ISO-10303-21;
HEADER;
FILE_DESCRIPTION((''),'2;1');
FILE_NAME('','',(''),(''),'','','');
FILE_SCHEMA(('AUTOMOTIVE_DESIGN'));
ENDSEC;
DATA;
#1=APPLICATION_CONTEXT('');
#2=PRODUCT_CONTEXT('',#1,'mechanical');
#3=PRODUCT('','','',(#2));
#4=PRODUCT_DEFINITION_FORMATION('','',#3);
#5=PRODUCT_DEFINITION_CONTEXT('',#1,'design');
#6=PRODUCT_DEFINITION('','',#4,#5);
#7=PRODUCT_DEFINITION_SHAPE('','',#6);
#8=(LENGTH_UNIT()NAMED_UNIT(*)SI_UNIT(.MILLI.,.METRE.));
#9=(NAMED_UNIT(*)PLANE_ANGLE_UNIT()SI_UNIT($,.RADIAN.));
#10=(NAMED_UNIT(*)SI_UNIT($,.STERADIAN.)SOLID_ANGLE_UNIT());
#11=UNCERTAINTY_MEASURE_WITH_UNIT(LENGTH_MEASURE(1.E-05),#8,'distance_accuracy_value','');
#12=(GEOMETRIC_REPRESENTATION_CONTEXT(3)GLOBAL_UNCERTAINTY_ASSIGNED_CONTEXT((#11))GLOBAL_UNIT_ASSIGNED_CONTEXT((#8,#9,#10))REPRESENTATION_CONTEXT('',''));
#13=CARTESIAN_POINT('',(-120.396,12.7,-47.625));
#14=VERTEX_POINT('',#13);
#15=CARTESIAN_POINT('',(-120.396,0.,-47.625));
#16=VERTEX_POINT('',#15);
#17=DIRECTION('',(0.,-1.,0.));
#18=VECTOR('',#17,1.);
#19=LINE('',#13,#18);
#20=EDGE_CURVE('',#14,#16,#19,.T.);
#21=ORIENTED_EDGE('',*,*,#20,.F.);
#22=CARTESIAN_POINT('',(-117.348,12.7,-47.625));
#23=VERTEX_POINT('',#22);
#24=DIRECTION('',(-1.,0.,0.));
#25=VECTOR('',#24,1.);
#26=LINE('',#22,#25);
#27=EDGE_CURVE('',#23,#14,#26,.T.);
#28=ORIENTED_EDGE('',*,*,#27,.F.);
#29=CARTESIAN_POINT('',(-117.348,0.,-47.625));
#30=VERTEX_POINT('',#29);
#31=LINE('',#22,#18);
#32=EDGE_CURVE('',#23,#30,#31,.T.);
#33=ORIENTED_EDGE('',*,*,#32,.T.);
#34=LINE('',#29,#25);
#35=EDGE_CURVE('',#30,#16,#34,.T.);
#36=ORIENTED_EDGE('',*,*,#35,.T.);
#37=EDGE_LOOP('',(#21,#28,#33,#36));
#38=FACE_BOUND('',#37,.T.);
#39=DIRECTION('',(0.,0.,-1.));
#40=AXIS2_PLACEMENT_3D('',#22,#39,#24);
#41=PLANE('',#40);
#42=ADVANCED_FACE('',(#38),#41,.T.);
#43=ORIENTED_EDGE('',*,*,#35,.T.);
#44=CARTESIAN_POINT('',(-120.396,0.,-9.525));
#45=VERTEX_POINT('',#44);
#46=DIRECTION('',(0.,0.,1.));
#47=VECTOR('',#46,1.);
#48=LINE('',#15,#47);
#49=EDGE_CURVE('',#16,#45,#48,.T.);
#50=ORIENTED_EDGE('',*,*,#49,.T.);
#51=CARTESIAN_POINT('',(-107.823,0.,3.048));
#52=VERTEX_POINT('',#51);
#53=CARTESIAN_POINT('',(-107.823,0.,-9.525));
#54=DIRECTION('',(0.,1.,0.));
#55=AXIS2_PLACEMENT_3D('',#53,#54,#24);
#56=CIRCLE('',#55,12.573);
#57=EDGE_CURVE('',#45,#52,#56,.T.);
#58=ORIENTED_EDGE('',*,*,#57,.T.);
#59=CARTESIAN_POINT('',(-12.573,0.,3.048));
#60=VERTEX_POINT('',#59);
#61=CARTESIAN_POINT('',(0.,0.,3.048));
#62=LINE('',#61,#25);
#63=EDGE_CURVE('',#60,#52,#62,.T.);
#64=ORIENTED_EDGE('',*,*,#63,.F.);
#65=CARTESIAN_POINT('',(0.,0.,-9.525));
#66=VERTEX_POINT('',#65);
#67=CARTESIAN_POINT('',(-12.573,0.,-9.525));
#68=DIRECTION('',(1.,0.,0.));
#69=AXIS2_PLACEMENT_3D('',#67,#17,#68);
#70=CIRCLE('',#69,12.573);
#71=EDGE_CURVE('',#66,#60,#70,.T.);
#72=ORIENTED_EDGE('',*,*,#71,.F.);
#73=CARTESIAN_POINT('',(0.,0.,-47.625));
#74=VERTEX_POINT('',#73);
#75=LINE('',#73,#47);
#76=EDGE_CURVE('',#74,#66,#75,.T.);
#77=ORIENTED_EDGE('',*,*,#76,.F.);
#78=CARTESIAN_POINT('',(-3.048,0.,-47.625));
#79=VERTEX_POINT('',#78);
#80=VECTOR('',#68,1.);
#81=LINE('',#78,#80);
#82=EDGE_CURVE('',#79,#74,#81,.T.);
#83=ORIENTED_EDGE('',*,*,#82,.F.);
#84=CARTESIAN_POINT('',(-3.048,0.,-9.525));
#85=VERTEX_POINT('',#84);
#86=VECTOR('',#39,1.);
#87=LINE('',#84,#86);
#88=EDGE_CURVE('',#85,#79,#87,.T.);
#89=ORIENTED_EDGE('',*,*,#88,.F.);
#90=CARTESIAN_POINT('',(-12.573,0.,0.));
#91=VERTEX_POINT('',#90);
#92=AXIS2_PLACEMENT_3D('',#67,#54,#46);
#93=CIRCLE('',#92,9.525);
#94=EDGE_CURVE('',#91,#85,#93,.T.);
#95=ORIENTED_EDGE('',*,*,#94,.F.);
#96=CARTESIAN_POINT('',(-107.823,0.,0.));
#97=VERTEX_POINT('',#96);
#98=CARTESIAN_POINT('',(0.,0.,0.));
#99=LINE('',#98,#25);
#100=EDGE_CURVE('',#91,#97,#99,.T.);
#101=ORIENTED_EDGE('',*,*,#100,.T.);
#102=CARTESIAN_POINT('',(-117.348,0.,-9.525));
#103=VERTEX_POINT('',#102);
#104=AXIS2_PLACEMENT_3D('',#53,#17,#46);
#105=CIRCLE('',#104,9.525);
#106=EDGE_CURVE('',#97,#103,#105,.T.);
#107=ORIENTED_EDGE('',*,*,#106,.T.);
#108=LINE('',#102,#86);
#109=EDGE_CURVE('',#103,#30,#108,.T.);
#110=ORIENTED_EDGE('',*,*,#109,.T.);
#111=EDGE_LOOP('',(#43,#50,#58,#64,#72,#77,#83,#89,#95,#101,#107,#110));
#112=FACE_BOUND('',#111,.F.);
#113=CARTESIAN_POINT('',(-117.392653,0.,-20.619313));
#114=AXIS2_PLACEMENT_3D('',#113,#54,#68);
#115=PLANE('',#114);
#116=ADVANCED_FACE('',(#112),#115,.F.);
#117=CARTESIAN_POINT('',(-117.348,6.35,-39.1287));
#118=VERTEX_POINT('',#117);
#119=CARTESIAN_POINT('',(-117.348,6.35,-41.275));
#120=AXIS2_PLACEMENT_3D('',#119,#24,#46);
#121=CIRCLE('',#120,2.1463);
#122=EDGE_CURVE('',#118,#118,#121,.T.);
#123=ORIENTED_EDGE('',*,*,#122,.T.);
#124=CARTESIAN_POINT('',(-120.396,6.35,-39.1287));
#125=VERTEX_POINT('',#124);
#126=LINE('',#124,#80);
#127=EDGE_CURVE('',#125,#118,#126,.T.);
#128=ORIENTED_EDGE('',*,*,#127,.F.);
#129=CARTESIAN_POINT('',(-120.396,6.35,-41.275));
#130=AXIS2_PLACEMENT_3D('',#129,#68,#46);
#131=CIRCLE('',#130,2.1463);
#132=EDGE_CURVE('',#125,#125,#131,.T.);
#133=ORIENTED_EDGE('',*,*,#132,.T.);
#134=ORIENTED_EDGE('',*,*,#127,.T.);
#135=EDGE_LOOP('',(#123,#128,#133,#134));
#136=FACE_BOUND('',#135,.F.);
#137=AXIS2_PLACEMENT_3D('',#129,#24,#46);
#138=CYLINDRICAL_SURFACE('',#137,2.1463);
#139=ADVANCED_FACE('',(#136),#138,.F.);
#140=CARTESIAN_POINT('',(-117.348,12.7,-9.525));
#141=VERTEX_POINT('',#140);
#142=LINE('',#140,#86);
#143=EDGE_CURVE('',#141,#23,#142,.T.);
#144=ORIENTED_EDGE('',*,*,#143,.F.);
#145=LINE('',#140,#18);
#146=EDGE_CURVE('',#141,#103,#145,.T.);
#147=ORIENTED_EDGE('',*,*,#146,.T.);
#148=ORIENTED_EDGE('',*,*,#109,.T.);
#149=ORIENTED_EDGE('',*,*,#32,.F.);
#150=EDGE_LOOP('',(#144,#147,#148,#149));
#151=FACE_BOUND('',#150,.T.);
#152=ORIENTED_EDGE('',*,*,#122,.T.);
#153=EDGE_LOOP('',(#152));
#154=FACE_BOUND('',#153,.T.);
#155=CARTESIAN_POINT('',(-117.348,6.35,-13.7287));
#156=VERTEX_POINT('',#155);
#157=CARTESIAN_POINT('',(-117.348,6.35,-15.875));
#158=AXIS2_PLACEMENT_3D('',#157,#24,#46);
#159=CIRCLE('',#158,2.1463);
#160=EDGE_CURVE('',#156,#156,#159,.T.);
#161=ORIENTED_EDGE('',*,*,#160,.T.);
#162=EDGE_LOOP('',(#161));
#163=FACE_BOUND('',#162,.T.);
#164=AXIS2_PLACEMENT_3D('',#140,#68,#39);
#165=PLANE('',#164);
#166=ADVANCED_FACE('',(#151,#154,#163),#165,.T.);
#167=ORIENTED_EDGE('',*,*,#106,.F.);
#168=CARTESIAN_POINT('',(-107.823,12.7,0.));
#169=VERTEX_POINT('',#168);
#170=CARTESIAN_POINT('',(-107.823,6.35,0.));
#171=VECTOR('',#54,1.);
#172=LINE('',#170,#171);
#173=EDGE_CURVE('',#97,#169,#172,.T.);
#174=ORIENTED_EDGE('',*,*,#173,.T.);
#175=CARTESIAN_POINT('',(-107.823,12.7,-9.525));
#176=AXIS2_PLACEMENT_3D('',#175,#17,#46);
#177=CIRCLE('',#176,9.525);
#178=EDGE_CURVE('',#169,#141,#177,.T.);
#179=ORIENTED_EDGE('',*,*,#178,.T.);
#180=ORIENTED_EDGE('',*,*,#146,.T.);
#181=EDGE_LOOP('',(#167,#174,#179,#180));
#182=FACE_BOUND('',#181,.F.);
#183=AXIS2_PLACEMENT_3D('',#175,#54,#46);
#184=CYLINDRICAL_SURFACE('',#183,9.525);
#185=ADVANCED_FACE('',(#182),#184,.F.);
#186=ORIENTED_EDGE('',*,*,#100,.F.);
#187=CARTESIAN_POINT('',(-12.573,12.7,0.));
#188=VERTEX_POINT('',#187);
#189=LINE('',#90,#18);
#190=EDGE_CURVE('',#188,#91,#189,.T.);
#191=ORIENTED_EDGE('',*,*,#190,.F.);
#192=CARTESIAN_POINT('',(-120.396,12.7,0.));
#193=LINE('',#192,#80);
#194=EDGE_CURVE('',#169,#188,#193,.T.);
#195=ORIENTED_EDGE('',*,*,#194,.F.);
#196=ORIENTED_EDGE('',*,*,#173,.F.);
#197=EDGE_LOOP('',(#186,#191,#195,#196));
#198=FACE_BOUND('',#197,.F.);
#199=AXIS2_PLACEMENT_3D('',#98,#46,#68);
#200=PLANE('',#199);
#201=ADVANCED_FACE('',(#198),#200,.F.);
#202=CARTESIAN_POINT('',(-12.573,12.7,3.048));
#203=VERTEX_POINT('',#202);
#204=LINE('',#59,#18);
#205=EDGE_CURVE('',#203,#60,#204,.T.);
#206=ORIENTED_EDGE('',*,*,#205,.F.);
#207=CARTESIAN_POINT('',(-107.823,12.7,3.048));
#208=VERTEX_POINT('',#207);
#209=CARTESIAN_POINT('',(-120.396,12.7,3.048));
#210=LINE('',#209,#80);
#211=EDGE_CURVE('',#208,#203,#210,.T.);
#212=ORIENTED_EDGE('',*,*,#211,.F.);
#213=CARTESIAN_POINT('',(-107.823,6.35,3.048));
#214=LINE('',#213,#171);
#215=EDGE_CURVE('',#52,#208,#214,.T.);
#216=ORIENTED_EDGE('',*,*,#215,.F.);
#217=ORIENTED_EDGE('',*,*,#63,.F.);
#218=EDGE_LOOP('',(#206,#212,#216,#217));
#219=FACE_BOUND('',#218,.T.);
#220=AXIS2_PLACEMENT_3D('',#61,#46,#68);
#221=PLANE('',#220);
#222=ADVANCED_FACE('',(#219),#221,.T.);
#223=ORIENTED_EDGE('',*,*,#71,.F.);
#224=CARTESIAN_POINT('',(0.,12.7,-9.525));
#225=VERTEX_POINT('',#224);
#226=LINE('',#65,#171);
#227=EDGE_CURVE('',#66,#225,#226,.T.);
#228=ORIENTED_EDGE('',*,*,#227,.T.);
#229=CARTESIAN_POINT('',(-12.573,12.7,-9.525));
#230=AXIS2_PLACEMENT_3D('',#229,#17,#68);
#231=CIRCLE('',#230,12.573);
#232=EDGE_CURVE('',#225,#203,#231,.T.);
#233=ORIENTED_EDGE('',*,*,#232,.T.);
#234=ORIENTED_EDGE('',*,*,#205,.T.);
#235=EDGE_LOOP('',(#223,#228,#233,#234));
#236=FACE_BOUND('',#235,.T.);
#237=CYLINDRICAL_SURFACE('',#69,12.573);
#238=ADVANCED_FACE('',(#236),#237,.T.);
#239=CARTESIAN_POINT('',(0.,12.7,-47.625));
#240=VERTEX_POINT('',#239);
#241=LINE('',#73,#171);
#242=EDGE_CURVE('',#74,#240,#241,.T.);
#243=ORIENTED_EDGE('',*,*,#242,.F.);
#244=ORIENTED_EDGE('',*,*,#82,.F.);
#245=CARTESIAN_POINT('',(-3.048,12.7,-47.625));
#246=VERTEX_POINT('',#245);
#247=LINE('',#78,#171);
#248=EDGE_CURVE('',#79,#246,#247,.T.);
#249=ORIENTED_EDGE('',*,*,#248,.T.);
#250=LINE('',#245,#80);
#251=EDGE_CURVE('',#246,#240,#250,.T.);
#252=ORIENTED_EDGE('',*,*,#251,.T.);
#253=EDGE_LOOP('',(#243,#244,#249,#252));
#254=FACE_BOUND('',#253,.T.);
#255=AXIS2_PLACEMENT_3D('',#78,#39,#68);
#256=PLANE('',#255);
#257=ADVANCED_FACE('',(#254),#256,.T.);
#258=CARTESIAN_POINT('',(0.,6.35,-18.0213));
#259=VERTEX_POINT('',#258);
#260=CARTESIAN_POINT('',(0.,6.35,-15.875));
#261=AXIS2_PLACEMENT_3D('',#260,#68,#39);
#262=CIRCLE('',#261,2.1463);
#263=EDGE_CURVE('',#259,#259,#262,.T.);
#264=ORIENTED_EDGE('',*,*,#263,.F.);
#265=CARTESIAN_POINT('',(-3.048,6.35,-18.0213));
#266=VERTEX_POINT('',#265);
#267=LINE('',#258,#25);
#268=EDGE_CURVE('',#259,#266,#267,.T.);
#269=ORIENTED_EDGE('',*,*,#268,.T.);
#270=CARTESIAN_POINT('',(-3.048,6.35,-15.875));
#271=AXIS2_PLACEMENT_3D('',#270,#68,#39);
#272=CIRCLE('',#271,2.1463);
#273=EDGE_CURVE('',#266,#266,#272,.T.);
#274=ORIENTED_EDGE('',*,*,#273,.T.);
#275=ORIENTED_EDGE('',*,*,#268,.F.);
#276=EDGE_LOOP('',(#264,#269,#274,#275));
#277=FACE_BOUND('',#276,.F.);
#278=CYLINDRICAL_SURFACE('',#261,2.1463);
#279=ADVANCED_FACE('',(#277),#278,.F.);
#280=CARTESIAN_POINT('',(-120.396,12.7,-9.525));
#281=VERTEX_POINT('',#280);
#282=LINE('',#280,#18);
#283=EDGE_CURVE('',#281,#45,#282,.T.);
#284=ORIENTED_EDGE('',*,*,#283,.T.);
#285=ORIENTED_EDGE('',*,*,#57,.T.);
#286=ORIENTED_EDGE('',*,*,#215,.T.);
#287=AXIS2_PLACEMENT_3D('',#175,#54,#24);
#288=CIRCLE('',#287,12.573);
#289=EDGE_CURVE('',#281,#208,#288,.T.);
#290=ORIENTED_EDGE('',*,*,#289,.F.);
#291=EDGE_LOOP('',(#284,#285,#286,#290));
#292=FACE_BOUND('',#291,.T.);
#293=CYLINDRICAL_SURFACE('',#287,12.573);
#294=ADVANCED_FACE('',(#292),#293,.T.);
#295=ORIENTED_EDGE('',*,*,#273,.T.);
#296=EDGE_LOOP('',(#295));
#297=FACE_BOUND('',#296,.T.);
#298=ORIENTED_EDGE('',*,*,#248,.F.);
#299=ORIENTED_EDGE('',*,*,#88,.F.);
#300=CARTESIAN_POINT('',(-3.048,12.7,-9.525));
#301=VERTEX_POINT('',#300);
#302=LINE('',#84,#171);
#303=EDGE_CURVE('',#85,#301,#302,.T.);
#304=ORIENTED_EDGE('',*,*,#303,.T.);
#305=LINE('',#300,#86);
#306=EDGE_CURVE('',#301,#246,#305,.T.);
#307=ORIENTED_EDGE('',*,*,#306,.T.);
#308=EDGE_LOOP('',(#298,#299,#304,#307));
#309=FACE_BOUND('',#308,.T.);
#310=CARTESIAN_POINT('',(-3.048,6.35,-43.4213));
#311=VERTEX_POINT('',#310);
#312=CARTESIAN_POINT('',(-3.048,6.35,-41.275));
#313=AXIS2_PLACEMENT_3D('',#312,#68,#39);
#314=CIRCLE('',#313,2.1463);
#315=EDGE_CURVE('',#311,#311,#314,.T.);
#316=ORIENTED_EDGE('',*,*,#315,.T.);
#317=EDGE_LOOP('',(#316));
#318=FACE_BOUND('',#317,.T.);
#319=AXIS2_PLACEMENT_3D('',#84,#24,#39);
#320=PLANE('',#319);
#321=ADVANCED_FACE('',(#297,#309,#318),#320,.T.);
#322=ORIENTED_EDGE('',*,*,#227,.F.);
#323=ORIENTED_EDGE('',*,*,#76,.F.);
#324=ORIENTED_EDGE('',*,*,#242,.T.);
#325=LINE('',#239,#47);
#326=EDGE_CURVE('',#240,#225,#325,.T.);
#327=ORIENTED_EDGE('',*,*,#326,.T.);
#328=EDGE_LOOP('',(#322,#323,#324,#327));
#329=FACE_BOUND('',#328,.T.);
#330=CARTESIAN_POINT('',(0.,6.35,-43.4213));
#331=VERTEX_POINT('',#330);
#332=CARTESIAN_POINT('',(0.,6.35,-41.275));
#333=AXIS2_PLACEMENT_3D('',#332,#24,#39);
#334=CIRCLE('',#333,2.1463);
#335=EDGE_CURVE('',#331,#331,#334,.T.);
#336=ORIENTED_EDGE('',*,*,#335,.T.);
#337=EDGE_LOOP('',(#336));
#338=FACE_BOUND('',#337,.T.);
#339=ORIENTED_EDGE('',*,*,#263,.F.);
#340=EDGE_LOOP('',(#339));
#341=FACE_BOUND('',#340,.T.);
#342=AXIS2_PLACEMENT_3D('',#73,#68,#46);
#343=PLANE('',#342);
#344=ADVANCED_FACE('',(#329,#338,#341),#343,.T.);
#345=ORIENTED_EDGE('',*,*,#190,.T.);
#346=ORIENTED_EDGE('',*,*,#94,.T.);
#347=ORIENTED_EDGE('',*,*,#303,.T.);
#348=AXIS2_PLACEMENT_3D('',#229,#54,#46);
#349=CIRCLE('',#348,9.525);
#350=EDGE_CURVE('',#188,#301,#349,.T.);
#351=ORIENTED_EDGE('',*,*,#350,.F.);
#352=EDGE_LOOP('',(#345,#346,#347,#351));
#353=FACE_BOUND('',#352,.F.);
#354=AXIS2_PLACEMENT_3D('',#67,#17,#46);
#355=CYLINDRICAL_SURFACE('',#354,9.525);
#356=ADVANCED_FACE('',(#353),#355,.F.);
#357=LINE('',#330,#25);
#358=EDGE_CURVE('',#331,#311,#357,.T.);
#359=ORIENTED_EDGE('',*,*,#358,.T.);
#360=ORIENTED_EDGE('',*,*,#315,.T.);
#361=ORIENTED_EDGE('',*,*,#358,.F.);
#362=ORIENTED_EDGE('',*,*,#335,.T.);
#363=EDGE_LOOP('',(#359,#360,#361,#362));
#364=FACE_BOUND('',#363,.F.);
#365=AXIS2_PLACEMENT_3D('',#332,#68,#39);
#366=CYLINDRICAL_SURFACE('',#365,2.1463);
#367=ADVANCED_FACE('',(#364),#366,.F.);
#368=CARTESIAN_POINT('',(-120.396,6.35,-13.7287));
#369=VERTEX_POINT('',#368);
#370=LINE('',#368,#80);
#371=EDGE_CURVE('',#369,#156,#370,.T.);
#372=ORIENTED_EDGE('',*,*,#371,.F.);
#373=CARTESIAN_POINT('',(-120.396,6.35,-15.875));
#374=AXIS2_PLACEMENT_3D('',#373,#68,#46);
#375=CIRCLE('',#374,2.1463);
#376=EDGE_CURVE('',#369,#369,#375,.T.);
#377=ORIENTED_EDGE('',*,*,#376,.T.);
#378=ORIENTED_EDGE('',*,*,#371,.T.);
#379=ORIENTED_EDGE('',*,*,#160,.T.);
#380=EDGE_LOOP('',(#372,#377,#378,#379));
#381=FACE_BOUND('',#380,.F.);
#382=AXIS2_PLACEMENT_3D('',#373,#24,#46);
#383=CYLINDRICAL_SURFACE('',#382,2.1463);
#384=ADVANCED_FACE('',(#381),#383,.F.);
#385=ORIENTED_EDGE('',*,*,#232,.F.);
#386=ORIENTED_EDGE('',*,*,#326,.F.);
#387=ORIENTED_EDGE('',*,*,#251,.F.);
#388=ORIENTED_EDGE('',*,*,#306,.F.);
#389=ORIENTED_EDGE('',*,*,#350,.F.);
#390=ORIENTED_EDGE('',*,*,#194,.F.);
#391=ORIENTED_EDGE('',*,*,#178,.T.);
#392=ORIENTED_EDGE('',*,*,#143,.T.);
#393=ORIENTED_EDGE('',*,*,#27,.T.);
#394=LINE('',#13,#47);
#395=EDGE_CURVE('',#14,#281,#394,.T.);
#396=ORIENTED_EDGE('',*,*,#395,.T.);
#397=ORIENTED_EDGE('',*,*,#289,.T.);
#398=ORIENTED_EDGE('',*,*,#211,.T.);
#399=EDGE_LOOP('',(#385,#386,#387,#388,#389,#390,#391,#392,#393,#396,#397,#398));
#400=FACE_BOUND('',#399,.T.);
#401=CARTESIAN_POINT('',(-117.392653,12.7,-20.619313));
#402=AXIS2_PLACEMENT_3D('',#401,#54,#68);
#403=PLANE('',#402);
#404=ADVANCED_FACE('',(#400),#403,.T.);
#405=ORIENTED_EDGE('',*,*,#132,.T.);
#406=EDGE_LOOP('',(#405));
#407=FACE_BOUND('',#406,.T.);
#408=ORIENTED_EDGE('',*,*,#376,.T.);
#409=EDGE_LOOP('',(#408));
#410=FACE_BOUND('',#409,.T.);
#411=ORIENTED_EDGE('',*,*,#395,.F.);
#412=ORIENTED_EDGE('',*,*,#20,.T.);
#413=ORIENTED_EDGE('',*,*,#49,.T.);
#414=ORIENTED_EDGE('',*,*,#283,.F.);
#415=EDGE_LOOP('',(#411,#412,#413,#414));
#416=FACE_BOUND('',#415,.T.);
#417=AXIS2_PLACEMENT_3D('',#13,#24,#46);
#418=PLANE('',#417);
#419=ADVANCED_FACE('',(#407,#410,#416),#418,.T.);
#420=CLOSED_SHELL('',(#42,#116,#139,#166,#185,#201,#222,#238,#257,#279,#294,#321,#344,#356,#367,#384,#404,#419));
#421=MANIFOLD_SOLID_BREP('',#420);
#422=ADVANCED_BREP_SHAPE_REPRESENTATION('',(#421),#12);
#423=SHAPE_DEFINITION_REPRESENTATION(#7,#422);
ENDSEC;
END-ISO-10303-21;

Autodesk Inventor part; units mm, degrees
ref_plane "YZ Plane" through (0, 0, 0) normal (1, 0, 0) x (0, 1, 0)
ref_plane "XZ Plane" through (0, 0, 0) normal (0, 1, 0) x (-1, 0, 0)
ref_plane "XY Plane" through (0, 0, 0) normal (0, 0, 1) x (1, 0, 0)
sketch "Sketch1" plane through (0, 0, 0) normal (0, 0, 1) x (1, 0, 0)
  line L0 (0, 0) -> (-120.396, 0)
  line L1 (-120.396, 0) -> (-120.396, 12.7)
  line L2 (-120.396, 12.7) -> (0, 12.7)
  line L3 (0, 12.7) -> (0, 0)
  dimension "d0" = 120.396
  dimension "d1" = 12.7
extrude "Plate1" add sketch "Sketch1" along normal blind 3.048
sketch "Sketch2" plane through (-3.048, 0, 3.048) normal (1, 0, 0) x (0, 1, 0)
  line L0 (12.7, 0) -> (0, 0)
  line L1 (0, 0) -> (0, -50.673)
  line L2 (0, -50.673) -> (12.7, -50.673)
  line L3 (12.7, -50.673) -> (12.7, 0)
edge flange "Flange1" height 47.625 angle 90 thickness 3.048 bend radius 9.525 thickness toward (1, 0, 0) relief tear relief width 3.048 relief depth 1.524 edges at (0, 6.35, 0) wall of the first edge with corners at (-3.048, 12.7, 3.048) (-3.048, 0, 3.048) (-3.048, 0, -47.625) (-3.048, 12.7, -47.625)
bend "Bend1"
corner "Corner1"
sketch "Sketch3" plane through (-117.348, 12.7, 3.048) normal (-1, 0, 0) x (0, -1, 0)
  line L0 (12.7, 0) -> (0, 0)
  line L1 (0, 0) -> (0, -50.673)
  line L2 (0, -50.673) -> (12.7, -50.673)
  line L3 (12.7, -50.673) -> (12.7, 0)
edge flange "Flange2" height 47.625 angle 90 thickness 3.048 bend radius 9.525 thickness toward (-1, 0, 0) relief tear relief width 3.048 relief depth 1.524 edges at (-120.396, 6.35, 0) wall of the first edge with corners at (-117.348, 0, 3.048) (-117.348, 12.7, 3.048) (-117.348, 12.7, -47.625) (-117.348, 0, -47.625)
bend "Bend2"
corner "Corner2"
sketch "Sketch4" plane through (0, 0, -47.625) normal (1, 0, 0) x (0, 0, -1)
  line L0 (0, 0) -> (-38.1, 0) projected
  line L1 (0, 12.7) -> (0, 0) projected
  line L2 (-38.1, 12.7) -> (0, 12.7) projected
  line L3 (0, 6.35) -> (-6.35, 6.35)
  line L4 (-6.35, 6.35) -> (-31.75, 6.35)
  circle A0 centre (-31.75, 6.35) radius 2.1463
  circle A1 centre (-6.35, 6.35) radius 2.1463
  point P0 (-47.625, 0)
  dimension "d23" = 6.35
  dimension "d24" = 25.4
  dimension "d25" = 4.2926
  dimension "d26" = 4.2926
extrude "Cut1" cut sketch "Sketch4" against normal blind 3.048
sketch "Sketch5" plane through (-120.396, 0, -47.625) normal (-1, 0, 0) x (0, 0, 1)
  line L0 (0, 0) -> (0, 12.7) projected
  line L1 (38.1, 0) -> (0, 0) projected
  line L2 (0, 6.35) -> (6.35, 6.35)
  line L3 (6.35, 6.35) -> (31.75, 6.35)
  circle A0 centre (6.35, 6.35) radius 2.1463
  circle A1 centre (31.75, 6.35) radius 2.1463
  point P0 (47.625, 0)
  dimension "d29" = 6.35
  dimension "d30" = 25.4
  dimension "d31" = 4.2926
  dimension "d32" = 4.2926
extrude "Cut2" cut sketch "Sketch5" against normal blind 3.048
equation "\"d27\" = Thickness"
equation "\"d33\" = Thickness"
equation "\"d3\" = BendReliefWidth"
equation "\"d4\" = BendReliefDepth"
equation "\"d5\" = MinimumRemnant"
equation "\"d6\" = BendRadius"
equation "\"d10\" = CornerReliefSize"
equation "\"d11\" = GapSize"
equation "\"d12\" = JacobiRadiusSize"
equation "\"d13\" = BendReliefWidth"
equation "\"d14\" = BendReliefDepth"
equation "\"d15\" = MinimumRemnant"
equation "\"d16\" = BendRadius"
equation "\"d20\" = CornerReliefSize"
equation "\"d21\" = GapSize"
equation "\"d22\" = JacobiRadiusSize"
equation "\"BendRadius\" = Thickness"
equation "\"BendReliefWidth\" = Thickness"
equation "\"BendReliefDepth\" = 0.5 * Thickness"
equation "\"CornerReliefSize\" = 4 * Thickness"
equation "\"MinimumRemnant\" = 2 * Thickness"
equation "\"TransitionRadius\" = BendRadius"
equation "\"JacobiRadiusSize\" = BendRadius"
equation "\"GapSize\" = Thickness"
equation "\"d2\" = BendRadius"
equation "\"Thickness\" = 3.048"
properties part number "Generic brace"
